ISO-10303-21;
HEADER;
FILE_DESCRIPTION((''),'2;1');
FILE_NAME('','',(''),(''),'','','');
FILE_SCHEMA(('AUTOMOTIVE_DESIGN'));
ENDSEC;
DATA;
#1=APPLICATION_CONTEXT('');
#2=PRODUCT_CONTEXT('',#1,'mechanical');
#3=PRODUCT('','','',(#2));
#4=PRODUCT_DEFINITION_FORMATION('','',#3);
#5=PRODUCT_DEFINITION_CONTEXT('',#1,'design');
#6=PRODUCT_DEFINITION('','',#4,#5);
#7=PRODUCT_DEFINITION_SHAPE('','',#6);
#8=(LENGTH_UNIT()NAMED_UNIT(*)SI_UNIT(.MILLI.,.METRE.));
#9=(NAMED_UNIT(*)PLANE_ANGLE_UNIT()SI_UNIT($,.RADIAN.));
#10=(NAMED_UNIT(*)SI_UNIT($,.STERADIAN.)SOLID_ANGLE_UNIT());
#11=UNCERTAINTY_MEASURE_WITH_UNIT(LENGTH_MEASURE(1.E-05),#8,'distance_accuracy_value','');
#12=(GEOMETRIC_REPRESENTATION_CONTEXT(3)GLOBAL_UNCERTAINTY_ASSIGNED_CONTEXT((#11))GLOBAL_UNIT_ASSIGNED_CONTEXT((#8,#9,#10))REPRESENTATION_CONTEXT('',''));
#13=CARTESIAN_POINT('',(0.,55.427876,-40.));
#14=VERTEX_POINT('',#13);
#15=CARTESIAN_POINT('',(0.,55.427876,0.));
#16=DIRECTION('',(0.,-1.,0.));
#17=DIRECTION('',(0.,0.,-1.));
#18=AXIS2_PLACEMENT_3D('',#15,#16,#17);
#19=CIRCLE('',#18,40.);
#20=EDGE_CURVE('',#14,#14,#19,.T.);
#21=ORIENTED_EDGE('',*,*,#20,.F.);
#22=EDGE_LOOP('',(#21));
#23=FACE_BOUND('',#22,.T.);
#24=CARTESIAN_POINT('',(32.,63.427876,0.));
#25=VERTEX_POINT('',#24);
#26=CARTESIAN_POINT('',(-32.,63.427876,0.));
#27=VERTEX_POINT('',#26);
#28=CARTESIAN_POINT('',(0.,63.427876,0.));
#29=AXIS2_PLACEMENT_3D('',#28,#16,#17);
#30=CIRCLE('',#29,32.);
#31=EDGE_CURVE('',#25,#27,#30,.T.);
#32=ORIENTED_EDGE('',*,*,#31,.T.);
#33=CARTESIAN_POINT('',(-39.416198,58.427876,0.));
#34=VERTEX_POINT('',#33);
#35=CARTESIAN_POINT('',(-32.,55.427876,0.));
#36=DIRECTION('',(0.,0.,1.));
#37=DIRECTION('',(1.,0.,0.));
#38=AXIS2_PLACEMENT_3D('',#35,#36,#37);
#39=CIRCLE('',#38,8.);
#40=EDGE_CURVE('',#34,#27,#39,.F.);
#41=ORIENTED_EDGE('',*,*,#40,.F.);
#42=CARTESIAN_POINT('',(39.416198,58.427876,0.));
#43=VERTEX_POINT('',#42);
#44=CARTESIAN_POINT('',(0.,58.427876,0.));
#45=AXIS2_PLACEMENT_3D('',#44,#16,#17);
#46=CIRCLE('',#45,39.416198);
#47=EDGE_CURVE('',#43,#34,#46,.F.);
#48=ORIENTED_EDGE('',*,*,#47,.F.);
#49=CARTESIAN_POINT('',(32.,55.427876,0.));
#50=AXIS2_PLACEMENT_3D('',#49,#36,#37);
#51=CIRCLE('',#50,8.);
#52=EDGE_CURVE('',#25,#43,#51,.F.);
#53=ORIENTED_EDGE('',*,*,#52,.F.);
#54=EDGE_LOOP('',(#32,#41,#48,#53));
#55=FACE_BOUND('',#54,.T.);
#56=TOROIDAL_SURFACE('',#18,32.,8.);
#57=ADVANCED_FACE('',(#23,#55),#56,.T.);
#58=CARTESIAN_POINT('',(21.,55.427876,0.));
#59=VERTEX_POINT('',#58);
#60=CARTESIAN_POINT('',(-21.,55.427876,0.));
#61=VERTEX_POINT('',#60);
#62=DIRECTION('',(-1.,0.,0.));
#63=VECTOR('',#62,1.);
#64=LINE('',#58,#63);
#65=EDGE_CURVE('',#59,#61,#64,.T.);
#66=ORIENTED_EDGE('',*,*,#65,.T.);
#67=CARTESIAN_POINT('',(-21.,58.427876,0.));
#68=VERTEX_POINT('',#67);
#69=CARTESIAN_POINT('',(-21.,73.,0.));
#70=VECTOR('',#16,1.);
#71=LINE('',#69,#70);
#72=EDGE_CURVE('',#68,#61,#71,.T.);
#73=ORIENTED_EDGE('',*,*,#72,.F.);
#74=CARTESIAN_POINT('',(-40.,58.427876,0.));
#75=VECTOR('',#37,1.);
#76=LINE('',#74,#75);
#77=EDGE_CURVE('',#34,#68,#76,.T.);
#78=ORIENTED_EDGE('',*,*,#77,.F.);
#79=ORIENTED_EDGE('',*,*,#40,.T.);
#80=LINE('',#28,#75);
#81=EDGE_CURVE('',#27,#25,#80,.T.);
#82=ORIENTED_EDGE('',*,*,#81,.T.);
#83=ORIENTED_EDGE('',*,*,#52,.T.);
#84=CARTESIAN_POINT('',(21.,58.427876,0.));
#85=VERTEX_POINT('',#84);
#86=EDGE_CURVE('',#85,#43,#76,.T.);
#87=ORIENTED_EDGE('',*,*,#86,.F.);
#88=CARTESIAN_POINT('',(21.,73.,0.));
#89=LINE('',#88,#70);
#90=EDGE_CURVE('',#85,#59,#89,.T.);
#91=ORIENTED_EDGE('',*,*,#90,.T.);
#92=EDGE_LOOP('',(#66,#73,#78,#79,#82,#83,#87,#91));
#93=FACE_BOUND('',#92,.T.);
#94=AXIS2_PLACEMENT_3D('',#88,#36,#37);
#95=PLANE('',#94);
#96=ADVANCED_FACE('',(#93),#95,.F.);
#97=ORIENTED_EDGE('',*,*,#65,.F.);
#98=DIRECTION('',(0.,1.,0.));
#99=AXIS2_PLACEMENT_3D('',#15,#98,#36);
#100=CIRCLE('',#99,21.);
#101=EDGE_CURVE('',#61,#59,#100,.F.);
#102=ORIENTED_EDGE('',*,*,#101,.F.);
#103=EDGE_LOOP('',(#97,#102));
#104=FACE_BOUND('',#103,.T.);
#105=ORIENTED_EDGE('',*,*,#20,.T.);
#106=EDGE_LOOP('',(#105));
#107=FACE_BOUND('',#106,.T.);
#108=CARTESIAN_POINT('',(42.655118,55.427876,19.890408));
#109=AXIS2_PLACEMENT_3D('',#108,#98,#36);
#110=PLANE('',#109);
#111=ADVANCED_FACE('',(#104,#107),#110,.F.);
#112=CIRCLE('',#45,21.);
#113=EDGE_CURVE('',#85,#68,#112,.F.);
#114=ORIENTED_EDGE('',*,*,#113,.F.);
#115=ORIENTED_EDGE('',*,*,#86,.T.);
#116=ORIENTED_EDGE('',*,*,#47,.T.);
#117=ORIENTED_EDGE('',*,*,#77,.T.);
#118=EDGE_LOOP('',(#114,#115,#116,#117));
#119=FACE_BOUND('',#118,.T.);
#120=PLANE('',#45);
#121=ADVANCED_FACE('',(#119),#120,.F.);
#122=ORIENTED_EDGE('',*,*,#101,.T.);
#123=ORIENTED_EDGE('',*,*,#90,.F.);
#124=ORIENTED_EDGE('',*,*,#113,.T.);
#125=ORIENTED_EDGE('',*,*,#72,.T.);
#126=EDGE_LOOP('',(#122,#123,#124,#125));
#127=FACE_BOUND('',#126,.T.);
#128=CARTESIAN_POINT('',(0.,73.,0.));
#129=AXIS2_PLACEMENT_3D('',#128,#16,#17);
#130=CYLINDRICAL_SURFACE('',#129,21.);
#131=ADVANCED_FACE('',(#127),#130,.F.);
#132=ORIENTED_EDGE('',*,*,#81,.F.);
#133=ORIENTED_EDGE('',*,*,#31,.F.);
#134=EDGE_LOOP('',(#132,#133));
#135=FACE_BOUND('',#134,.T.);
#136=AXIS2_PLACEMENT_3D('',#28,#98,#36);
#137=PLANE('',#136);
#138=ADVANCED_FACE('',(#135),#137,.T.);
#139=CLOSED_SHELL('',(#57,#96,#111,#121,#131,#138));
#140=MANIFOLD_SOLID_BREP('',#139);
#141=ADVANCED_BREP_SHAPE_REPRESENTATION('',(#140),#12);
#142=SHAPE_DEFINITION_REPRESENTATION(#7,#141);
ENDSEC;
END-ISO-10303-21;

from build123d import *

# Parameters (mm, degrees)
CUT_EXTRUDE3_DEPTH           = 60
CUT_EXTRUDE5_DEPTH           = 2
CUT_EXTRUDE5_DEPTH_BACK      = 30
SKETCH19_W                   = 12
SKETCH19_H                   = 36.5
CUT_REVOLVE2_ANGLE           = 65
CUT_REVOLVE2_OTHER_WAY_ANGLE = 65
SKETCH21_W                   = 3.25
SKETCH21_H                   = 4
BOSS_EXTRUDE3_DEPTH          = 1.35
CIRPATTERN1_COUNT            = 5
CUT_EXTRUDE9_START           = -5
CUT_EXTRUDE9_DEPTH           = 5
INTERSECT1_DEPTH             = 55.427876097
INTERSECT1_START             = 55.427876097
INTERSECT1_2_OUTLINE_R       = 37.002145429
INTERSECT1_2_DEPTH           = 2


# Read off the part's stored shape, not the designer's step: Cut-Extrude9, Intersect1
with BuildPart() as part:
    # Sketch1 → Revolve1 (revolve)
    with BuildSketch(Plane.XY, mode=Mode.PRIVATE) as revolve1_sk:
        with BuildLine():
            Line((0, 63.427876097), (32, 63.427876097))
            ThreePointArc((32, 63.427876097), (37.656854249, 61.084730346), (40, 55.427876097))
            Line((40, 55.427876097), (40, 31.556288966))
            ThreePointArc((40, 31.556288966), (38.188122658, 24.409721904), (33.190210564, 18.989648567))
            Line((33.190210564, 18.989648567), (28.539859624, 15.958818353))
            ThreePointArc((28.539859624, 15.958818353), (25.207918228, 12.345436129), (24, 7.581058088))
            Line((24, 7.581058088), (24, 3.25))
            Line((24, 3.25), (24.35, 3))
            Line((24.35, 3), (24.35, 0))
            Line((24.35, 0), (22.5, 0))
            Line((22.5, 0), (22.5, 12.5))
            ThreePointArc((22.5, 12.5), (22.353553391, 12.853553391), (22, 13))
            Line((22, 13), (0, 13))
            Line((0, 13), (0, 63.427876097))
        make_face()
    revolve(revolve1_sk.sketch.rotate(Axis((0, 0, 0), (0, 1, 0)), 90), axis=Axis((0, 0, 0), (0, 1, 0)))

    # Sketch11 → Cut-Extrude3 (cut)
    with BuildSketch(Plane(origin=(0, 13, 0), x_dir=(-1, 0, 0), z_dir=(0, -1, 0))):
        with BuildLine():
            Line((-21, 0), (21, 0))
            ThreePointArc((21, 0), (0, 21), (-21, 0))
        make_face()
    extrude(amount=-CUT_EXTRUDE3_DEPTH, mode=Mode.SUBTRACT)

    # Sketch9 → Cut-Extrude5 (cut, two sides: drawn at the far end of the back side and taken through both)
    with BuildSketch(Plane(origin=(0, 55.427876097, 0), x_dir=(1, 0, 0), z_dir=(0, 1, 0)).offset(-CUT_EXTRUDE5_DEPTH_BACK)):
        with BuildLine():
            ThreePointArc((-37, -1.601545046), (-0.398454954, -39), (37, -2.398454954))
            ThreePointArc((37, -2.398454954), (0.398454954, 35), (-37, -1.601545046))
        make_face()
        with BuildLine():
            Line((-24, -1.763080838), (24, -1.763080838))
            ThreePointArc((24, -1.763080838), (0, 24), (-24, -1.763080838))
        make_face(mode=Mode.SUBTRACT)
    extrude(amount=CUT_EXTRUDE5_DEPTH + CUT_EXTRUDE5_DEPTH_BACK, mode=Mode.SUBTRACT)

    # Sketch19 → Cut-Revolve2 (revolve, cut)
    with BuildSketch(Plane(origin=(0, 0, 0), x_dir=(0, 0, -1), z_dir=(1, 0, 0))):
        with Locations((-41.064715832, 37.177876097)):
            Rectangle(SKETCH19_W, SKETCH19_H)
    revolve(axis=Axis((0, 0, 0), (0, 1, 0)), revolution_arc=CUT_REVOLVE2_ANGLE, mode=Mode.SUBTRACT)

    # Sketch19 → Cut-Revolve2 other way (revolve, cut)
    with BuildSketch(Plane(origin=(0, 0, 0), x_dir=(0, 0, -1), z_dir=(1, 0, 0))):
        with Locations((-41.064715832, 37.177876097)):
            Rectangle(SKETCH19_W, SKETCH19_H)
    revolve(axis=Axis((0, 0, 0), (0, -1, 0)), revolution_arc=CUT_REVOLVE2_OTHER_WAY_ANGLE, mode=Mode.SUBTRACT)

    # Sketch21 → Boss-Extrude3 (add)
    with BuildSketch(Plane(origin=(0, 0, 22.5), x_dir=(-1, 0, 0), z_dir=(0, 0, -1))):
        with Locations((0, 2)):
            Rectangle(SKETCH21_W, SKETCH21_H)
    boss_extrude3 = extrude(amount=BOSS_EXTRUDE3_DEPTH)

    # CirPattern1: Boss-Extrude3 ×5 about axis
    cirpattern1_axis = Axis((0, 0, 0), (0, 1, 0))
    for i in range(1, CIRPATTERN1_COUNT):
        add(boss_extrude3.rotate(cirpattern1_axis, i * 360 / CIRPATTERN1_COUNT))

    # Cut-Extrude9 outline → Cut-Extrude9 (cut)
    with BuildSketch(Plane(origin=(0, 63.427876097, 0), x_dir=(1, 0, 0), z_dir=(0, 1, 0)).offset(CUT_EXTRUDE9_START)):
        with BuildLine():
            ThreePointArc((40, 0), (0, 40), (-40, 0))
            Line((-40, 0), (-21, 0))
            ThreePointArc((-21, 0), (0, 21), (21, 0))
            Line((21, 0), (40, 0))
        make_face()
    extrude(amount=CUT_EXTRUDE9_DEPTH, mode=Mode.SUBTRACT)

    # Intersect1 outline → Intersect1 (cut)
    with BuildSketch(Plane(origin=(0, 0, 0), x_dir=(1, 0, 0), z_dir=(0, 1, 0))):
        with BuildLine():
            Line((31.779425009, -14.818989253), (36.252311481, -16.90473047))
            ThreePointArc((36.252311481, -16.90473047), (0, 40), (-36.252311481, -16.90473047))
            Line((-36.252311481, -16.90473047), (-31.779425009, -14.818989253))
            ThreePointArc((-31.779425009, -14.818989253), (0, -35.064715832), (31.779425009, -14.818989253))
        make_face()
        with BuildLine():
            ThreePointArc((-21, 0), (0, 21), (21, 0))
            Line((21, 0), (-21, 0))
        make_face(mode=Mode.SUBTRACT)
    extrude(amount=INTERSECT1_DEPTH, mode=Mode.SUBTRACT)

    # Intersect1 2 outline → Intersect1 2 (add)
    with BuildSketch(Plane(origin=(0, 0, 0), x_dir=(1, 0, 0), z_dir=(0, 1, 0)).offset(INTERSECT1_START)):
        with Locations((0, -2)):
            Circle(INTERSECT1_2_OUTLINE_R)
        with BuildLine():
            ThreePointArc((-24, -1.763080838), (0, 24), (24, -1.763080838))
            Line((24, -1.763080838), (-24, -1.763080838))
        make_face(mode=Mode.SUBTRACT)
    extrude(amount=INTERSECT1_2_DEPTH)


solid = part.part
